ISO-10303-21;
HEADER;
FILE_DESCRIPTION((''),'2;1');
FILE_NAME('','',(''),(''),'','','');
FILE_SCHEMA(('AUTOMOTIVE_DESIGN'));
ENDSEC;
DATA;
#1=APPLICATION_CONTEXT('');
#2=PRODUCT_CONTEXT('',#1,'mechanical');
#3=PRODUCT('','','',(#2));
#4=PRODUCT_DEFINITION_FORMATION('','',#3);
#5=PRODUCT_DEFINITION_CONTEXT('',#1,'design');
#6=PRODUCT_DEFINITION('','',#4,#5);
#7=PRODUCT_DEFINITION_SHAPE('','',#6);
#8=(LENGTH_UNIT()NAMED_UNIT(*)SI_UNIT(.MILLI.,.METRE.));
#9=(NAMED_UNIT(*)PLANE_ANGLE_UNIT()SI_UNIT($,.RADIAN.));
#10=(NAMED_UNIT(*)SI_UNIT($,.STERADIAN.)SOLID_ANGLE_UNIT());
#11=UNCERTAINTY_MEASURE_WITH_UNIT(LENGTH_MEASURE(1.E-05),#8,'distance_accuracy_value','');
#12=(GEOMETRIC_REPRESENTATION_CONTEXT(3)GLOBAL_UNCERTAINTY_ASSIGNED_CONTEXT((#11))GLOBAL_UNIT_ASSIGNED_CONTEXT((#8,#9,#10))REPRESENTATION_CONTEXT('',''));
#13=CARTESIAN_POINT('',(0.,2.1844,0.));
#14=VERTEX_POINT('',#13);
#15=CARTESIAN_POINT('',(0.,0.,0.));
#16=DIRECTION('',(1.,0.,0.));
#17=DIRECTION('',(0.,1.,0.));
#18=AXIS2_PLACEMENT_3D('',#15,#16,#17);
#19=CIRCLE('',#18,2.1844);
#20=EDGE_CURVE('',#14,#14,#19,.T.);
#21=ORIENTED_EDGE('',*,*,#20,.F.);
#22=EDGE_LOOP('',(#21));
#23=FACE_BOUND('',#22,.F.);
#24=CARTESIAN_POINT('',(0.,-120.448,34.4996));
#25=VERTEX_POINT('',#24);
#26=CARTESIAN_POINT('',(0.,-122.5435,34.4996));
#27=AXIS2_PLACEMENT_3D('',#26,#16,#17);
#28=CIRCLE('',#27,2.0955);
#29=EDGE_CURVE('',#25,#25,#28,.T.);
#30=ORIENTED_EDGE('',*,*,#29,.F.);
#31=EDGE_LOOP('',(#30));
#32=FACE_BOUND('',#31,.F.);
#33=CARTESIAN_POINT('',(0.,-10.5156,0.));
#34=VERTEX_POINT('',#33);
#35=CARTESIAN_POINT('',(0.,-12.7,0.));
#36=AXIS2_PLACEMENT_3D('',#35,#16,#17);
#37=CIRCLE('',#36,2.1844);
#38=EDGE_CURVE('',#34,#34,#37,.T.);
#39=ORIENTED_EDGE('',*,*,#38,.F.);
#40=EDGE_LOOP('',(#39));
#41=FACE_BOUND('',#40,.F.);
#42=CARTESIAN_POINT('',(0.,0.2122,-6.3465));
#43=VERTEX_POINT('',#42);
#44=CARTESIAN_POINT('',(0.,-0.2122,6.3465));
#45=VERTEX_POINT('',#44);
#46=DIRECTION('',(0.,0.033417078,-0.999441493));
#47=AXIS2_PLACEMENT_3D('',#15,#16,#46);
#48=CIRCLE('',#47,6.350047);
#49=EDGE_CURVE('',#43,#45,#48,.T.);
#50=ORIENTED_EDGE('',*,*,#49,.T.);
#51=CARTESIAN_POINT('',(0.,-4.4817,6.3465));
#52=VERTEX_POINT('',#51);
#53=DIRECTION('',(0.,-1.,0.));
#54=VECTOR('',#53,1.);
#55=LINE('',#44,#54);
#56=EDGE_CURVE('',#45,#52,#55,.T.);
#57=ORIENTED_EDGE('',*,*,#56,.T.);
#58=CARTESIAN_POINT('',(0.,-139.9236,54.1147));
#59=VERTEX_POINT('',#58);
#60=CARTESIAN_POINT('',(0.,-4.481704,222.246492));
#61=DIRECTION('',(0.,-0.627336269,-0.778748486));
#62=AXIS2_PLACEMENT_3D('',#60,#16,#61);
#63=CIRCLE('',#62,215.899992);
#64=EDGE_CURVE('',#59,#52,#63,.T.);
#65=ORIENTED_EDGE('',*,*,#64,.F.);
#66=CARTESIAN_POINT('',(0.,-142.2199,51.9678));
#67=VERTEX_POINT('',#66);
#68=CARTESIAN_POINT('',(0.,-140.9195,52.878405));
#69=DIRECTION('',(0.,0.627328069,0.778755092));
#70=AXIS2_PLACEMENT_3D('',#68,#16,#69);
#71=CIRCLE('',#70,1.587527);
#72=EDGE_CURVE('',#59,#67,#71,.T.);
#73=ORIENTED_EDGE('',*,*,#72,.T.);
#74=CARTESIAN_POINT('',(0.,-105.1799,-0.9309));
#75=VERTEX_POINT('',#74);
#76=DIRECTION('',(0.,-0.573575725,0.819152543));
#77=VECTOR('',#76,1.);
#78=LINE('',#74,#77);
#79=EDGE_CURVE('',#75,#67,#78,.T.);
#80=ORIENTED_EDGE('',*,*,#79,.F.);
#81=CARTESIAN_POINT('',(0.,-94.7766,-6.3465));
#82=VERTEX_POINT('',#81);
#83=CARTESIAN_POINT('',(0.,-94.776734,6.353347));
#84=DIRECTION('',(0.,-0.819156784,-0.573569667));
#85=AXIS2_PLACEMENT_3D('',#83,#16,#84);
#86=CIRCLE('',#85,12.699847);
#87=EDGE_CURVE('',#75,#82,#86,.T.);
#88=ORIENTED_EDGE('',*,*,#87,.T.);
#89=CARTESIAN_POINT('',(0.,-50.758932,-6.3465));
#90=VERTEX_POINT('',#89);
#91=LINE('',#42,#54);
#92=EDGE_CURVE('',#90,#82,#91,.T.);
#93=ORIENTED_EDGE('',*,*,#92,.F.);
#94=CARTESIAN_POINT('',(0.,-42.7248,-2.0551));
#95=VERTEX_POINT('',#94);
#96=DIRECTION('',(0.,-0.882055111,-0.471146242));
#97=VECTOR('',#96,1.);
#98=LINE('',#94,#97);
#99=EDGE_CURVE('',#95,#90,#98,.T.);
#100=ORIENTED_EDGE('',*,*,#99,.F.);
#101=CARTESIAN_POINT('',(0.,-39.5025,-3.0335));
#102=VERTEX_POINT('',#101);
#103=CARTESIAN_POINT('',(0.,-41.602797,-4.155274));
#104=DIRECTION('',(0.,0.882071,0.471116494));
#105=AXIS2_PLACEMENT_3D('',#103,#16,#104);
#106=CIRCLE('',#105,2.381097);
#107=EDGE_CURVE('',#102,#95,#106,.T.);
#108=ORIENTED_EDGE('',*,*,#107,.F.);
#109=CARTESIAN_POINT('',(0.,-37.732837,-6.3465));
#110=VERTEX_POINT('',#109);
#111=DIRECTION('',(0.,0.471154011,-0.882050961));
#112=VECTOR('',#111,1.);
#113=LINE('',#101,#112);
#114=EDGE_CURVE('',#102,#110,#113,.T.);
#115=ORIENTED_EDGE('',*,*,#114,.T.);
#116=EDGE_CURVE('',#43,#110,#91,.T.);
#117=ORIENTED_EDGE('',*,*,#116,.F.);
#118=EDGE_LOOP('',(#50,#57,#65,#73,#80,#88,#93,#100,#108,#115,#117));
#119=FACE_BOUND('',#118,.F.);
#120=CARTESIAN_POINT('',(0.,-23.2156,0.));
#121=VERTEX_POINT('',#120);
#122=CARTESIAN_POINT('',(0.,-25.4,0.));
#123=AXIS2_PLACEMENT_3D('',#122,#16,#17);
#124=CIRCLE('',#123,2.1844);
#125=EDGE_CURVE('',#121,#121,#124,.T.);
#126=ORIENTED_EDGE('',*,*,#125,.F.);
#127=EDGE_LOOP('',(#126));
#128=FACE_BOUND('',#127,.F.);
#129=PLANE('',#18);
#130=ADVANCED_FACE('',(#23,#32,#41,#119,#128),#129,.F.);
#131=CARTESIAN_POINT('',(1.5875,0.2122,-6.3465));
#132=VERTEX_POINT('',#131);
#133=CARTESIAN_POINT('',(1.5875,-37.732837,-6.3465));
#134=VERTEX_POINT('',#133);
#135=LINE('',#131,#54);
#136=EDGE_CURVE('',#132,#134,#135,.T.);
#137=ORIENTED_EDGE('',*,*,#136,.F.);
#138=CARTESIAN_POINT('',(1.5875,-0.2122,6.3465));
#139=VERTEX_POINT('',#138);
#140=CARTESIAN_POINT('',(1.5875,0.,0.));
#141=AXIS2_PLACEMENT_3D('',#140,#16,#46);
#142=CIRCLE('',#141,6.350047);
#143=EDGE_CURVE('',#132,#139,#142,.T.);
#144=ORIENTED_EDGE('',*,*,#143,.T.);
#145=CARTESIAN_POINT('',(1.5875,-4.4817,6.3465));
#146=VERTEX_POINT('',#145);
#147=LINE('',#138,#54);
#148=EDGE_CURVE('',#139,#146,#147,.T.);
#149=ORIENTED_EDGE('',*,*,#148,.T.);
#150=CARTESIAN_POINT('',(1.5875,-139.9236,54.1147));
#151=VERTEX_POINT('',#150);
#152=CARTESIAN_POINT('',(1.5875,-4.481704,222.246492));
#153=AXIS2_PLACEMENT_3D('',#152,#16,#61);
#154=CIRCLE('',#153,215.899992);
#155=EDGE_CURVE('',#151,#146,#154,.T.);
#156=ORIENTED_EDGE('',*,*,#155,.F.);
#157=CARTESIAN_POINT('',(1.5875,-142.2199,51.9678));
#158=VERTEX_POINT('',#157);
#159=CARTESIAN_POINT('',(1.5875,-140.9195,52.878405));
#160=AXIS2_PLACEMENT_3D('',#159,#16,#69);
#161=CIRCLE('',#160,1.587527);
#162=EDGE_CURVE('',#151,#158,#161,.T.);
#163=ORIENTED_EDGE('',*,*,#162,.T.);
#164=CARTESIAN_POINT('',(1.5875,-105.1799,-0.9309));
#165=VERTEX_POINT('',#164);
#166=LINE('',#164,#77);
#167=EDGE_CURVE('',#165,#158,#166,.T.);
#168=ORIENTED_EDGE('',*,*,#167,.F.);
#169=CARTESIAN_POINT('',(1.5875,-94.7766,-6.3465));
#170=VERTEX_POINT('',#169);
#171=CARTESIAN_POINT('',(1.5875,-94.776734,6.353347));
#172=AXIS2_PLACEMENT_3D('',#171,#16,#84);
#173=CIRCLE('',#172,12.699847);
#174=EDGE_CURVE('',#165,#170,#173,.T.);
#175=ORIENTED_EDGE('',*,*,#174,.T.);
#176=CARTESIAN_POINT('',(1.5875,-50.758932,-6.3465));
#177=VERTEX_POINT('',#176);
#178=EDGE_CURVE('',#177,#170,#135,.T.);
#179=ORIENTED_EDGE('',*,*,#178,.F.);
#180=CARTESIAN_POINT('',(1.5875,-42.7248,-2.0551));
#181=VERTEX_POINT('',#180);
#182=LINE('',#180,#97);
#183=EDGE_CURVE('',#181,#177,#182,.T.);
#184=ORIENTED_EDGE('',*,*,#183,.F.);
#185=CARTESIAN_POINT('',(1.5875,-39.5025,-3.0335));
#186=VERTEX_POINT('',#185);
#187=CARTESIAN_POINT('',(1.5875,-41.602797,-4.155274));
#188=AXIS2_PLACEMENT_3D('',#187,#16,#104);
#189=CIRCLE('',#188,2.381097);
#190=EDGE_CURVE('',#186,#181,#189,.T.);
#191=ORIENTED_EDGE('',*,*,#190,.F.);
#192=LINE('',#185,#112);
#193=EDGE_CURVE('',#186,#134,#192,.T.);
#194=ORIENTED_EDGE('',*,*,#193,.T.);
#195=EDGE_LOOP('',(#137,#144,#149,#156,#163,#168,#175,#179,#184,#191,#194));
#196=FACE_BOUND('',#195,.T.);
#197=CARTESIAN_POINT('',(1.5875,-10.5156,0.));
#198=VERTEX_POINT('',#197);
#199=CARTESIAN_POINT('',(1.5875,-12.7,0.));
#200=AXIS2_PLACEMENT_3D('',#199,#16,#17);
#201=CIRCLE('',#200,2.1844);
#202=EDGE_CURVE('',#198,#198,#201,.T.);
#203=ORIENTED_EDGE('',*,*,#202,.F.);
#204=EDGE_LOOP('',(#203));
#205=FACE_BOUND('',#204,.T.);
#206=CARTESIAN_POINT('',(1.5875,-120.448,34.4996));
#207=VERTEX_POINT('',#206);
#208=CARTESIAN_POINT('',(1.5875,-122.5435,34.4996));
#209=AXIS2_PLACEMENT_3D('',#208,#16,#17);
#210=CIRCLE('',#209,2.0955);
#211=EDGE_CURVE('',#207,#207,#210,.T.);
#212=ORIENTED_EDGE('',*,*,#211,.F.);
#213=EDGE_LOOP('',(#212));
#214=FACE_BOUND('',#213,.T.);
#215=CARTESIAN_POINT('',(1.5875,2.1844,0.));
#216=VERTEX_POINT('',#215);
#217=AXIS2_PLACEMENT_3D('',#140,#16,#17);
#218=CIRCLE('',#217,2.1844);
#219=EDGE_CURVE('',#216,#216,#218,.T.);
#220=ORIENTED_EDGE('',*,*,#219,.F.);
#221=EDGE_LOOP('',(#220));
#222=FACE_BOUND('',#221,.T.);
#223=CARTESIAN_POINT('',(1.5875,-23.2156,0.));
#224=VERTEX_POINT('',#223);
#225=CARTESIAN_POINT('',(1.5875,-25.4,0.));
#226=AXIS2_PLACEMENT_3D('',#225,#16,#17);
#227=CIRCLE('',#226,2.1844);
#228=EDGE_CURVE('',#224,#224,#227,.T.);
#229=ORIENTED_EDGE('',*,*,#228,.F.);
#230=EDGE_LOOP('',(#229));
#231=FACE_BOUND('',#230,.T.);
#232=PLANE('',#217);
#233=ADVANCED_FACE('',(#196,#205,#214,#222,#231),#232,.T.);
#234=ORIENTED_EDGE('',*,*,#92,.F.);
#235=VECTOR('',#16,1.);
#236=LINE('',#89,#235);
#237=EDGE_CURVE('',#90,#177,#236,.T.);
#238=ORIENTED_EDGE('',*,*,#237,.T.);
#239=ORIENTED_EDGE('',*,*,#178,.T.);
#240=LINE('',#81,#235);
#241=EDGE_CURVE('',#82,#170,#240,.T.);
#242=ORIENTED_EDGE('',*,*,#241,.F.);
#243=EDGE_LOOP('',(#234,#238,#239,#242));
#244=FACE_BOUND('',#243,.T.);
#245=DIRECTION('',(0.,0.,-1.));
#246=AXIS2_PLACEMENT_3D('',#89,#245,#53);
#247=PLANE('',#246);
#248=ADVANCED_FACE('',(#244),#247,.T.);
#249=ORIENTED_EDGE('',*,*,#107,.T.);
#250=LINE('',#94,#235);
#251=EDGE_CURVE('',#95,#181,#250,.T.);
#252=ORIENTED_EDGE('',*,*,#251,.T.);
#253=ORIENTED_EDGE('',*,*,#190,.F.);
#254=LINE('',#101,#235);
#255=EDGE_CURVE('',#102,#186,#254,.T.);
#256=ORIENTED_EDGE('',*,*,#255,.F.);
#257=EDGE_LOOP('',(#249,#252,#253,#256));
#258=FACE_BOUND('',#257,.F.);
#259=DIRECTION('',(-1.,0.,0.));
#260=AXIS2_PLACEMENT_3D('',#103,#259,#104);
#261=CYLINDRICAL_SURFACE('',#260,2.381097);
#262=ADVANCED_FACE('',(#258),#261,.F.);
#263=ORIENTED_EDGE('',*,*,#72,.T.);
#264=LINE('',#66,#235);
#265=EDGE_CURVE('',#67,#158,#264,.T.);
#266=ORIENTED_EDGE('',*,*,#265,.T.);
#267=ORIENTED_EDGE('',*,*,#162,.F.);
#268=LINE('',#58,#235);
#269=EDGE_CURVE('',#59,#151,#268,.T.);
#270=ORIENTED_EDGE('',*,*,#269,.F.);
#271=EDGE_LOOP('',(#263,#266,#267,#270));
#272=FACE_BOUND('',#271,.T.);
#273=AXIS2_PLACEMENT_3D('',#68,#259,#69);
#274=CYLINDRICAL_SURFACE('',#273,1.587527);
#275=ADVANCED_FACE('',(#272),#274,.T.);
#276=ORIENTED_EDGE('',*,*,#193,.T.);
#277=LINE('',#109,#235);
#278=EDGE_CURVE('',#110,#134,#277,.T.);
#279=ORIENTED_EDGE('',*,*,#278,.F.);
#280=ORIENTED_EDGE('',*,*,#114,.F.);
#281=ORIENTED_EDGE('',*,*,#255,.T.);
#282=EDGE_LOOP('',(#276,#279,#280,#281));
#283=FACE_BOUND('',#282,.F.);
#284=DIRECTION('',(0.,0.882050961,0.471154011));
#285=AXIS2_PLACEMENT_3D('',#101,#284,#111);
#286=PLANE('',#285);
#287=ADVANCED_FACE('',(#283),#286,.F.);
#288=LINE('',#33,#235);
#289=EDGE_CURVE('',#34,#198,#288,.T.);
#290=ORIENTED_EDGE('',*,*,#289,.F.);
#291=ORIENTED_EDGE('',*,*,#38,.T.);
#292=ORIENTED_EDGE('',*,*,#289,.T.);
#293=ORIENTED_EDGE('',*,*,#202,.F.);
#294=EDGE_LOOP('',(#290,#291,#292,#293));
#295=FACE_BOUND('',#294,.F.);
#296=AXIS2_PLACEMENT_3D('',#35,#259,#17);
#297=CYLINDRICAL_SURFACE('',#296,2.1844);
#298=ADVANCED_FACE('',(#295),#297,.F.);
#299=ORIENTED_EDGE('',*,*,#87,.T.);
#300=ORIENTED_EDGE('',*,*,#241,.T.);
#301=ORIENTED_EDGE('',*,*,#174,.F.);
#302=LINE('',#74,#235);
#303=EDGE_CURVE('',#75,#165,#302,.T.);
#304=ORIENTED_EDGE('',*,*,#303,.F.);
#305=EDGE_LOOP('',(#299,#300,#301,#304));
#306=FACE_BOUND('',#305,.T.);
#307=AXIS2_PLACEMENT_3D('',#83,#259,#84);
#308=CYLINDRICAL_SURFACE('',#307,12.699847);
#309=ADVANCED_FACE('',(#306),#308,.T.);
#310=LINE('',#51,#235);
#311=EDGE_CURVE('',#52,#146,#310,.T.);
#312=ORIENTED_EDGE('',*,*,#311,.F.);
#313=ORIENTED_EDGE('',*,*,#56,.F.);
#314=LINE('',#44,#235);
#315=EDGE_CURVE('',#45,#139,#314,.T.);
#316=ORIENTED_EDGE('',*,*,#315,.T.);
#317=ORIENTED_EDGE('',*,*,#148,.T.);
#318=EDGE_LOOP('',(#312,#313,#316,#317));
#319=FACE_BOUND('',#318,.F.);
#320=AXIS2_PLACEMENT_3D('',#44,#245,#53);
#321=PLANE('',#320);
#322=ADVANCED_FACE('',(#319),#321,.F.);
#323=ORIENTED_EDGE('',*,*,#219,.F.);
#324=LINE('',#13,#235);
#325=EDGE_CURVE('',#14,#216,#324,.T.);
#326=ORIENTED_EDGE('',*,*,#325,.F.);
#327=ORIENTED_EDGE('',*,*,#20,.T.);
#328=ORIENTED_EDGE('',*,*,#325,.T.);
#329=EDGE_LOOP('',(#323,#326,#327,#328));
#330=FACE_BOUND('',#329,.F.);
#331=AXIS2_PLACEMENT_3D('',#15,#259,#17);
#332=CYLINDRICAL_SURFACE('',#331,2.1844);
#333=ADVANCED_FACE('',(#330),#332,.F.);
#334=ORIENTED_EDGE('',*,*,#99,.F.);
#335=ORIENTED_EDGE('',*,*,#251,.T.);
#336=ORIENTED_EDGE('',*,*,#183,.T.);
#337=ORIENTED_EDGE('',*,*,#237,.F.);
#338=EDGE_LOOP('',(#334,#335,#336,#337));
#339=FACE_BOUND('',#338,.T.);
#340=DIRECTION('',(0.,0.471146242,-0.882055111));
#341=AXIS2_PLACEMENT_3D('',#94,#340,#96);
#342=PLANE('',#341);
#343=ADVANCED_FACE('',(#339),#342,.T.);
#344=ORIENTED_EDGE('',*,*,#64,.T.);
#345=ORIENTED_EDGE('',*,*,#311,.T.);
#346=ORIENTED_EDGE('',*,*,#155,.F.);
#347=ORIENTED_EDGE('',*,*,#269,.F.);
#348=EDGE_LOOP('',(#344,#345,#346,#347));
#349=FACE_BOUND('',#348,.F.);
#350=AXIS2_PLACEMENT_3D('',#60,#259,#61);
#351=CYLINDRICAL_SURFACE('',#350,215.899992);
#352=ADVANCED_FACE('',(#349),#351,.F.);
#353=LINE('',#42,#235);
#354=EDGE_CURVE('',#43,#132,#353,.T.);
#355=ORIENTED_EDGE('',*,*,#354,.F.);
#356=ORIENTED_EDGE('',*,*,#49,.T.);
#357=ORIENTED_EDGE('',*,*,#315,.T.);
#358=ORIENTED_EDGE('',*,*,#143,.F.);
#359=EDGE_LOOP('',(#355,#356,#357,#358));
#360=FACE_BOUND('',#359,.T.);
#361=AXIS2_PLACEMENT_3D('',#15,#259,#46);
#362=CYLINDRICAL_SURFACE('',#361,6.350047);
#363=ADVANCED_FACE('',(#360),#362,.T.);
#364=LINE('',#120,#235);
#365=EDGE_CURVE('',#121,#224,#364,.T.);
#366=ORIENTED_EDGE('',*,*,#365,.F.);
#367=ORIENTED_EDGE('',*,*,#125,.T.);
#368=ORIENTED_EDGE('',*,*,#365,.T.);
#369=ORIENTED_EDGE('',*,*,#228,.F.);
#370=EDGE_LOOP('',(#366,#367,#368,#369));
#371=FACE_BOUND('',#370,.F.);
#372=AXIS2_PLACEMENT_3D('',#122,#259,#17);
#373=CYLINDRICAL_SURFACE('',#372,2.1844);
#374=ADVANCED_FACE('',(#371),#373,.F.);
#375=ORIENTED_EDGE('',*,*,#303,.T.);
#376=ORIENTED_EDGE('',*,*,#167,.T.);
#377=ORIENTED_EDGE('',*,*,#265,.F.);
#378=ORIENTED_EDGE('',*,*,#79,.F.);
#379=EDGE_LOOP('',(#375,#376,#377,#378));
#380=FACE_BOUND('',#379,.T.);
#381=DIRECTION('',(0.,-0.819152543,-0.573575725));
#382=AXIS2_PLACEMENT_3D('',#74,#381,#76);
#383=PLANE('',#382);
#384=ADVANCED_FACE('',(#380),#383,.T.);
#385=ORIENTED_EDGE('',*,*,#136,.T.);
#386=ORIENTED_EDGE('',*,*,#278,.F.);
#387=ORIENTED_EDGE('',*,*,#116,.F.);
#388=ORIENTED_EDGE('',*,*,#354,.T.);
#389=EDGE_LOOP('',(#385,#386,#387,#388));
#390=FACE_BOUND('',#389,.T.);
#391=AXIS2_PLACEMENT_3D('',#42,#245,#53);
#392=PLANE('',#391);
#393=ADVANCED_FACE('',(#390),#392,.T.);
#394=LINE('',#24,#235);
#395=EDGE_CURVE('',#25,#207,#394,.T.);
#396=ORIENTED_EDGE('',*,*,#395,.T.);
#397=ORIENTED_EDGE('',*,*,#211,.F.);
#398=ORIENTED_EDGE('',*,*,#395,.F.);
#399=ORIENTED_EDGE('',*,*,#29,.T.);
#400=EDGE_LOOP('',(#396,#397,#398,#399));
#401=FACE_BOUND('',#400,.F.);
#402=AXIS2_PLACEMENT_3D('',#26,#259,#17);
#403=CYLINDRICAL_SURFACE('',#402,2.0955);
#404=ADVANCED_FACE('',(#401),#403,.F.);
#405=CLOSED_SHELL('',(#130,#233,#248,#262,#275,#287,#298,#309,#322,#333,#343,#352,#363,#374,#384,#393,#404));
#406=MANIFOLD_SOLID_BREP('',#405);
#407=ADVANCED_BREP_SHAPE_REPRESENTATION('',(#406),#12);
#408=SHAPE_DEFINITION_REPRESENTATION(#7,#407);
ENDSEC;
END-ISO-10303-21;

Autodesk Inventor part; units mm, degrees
ref_plane "YZ Plane" through (0, 0, 0) normal (1, 0, 0) x (0, 1, 0)
ref_plane "XZ Plane" through (0, 0, 0) normal (0, 1, 0) x (-1, 0, 0)
ref_plane "XY Plane" through (0, 0, 0) normal (0, 0, 1) x (1, 0, 0)
sketch "main" plane through (0, 0, 0) normal (0, 0, 1) x (1, 0, 0)
  circle A0 centre (44.5304, -90.8931) radius 2.1844
  circle A1 centre (57.2304, -90.8931) radius 2.1844
  arc A2 (57.4426, -97.2395) -> (57.0183, -84.5466) centre (57.2304, -90.8931) ccw
  line L0 (57.0183, -84.5466) -> (52.7487, -84.5466)
  arc A3 (-82.6932, -36.7784) -> (52.7487, -84.5466) centre (52.7487, 131.3534) ccw
  line L1 (57.4426, -97.2395) -> (-37.5462, -97.2395)
  line L2 (-47.9494, -91.8239) -> (-84.9895, -38.9252)
  arc A4 (-82.6932, -36.7784) -> (-84.9895, -38.9252) centre (-83.6891, -38.0147) ccw
  arc A5 (-47.9494, -91.8239) -> (-37.5462, -97.2395) centre (-37.5462, -84.5395) ccw
  circle A6 centre (31.8304, -90.8931) radius 2.1844
  point P0 (7.1274, -71.1865)
  point P1 (-92.1475, -28.7025)
  point P2 (-44.1574, -97.2395)
  dimension "d1" = 12.7
  dimension "d2" = 101.6
  dimension "d3" = 1.5875
  dimension "d4" = 12.7
  dimension "d7" = 64.5774
  dimension "d10" = 12.7
  dimension "d15" = 125
  dimension "d16" = 12.7
  dimension "d17" = 215.9
sketch "Sketch1" plane through (0, 0, 0) normal (1, 0, 0) x (0, 1, 0)
  arc A0 (-39.5025, -3.0335) -> (-42.7248, -2.0551) centre (-41.6029, -4.1554) ccw projected
  line L0 (-42.7248, -2.0551) -> (-52.3306, -7.186) projected
  line L1 (-39.5025, -3.0335) -> (-35.7298, -10.0964) projected
  circle A1 centre (-122.5435, 34.4996) radius 2.0955
  circle A2 centre (-12.7, 0) radius 2.1844
  circle A3 centre (0, 0) radius 2.1844
  arc A4 (0.2122, -6.3465) -> (-0.2122, 6.3465) centre (0, 0) ccw
  line L2 (-0.2122, 6.3465) -> (-4.4817, 6.3465)
  arc A5 (-139.9236, 54.1147) -> (-4.4817, 6.3465) centre (-4.4817, 222.2465) ccw
  line L3 (0.2122, -6.3465) -> (-94.7766, -6.3465)
  line L4 (-105.1799, -0.9309) -> (-142.2199, 51.9678)
  arc A6 (-139.9236, 54.1147) -> (-142.2199, 51.9678) centre (-140.9195, 52.8784) ccw
  arc A7 (-105.1799, -0.9309) -> (-94.7766, -6.3465) centre (-94.7766, 6.3535) ccw
  circle A8 centre (-25.4, 0) radius 2.1844
  point P0 (-50.7588, -6.3465)
  point P1 (-37.7329, -6.3465)
extrude "Extrusion1" add sketch "Sketch1" along normal blind 1.5875 contours A0 L0 L3 A7 L4 A6 A5 L2 A4 L1
properties part number "Ramp" material "Acetal Resin, White"
